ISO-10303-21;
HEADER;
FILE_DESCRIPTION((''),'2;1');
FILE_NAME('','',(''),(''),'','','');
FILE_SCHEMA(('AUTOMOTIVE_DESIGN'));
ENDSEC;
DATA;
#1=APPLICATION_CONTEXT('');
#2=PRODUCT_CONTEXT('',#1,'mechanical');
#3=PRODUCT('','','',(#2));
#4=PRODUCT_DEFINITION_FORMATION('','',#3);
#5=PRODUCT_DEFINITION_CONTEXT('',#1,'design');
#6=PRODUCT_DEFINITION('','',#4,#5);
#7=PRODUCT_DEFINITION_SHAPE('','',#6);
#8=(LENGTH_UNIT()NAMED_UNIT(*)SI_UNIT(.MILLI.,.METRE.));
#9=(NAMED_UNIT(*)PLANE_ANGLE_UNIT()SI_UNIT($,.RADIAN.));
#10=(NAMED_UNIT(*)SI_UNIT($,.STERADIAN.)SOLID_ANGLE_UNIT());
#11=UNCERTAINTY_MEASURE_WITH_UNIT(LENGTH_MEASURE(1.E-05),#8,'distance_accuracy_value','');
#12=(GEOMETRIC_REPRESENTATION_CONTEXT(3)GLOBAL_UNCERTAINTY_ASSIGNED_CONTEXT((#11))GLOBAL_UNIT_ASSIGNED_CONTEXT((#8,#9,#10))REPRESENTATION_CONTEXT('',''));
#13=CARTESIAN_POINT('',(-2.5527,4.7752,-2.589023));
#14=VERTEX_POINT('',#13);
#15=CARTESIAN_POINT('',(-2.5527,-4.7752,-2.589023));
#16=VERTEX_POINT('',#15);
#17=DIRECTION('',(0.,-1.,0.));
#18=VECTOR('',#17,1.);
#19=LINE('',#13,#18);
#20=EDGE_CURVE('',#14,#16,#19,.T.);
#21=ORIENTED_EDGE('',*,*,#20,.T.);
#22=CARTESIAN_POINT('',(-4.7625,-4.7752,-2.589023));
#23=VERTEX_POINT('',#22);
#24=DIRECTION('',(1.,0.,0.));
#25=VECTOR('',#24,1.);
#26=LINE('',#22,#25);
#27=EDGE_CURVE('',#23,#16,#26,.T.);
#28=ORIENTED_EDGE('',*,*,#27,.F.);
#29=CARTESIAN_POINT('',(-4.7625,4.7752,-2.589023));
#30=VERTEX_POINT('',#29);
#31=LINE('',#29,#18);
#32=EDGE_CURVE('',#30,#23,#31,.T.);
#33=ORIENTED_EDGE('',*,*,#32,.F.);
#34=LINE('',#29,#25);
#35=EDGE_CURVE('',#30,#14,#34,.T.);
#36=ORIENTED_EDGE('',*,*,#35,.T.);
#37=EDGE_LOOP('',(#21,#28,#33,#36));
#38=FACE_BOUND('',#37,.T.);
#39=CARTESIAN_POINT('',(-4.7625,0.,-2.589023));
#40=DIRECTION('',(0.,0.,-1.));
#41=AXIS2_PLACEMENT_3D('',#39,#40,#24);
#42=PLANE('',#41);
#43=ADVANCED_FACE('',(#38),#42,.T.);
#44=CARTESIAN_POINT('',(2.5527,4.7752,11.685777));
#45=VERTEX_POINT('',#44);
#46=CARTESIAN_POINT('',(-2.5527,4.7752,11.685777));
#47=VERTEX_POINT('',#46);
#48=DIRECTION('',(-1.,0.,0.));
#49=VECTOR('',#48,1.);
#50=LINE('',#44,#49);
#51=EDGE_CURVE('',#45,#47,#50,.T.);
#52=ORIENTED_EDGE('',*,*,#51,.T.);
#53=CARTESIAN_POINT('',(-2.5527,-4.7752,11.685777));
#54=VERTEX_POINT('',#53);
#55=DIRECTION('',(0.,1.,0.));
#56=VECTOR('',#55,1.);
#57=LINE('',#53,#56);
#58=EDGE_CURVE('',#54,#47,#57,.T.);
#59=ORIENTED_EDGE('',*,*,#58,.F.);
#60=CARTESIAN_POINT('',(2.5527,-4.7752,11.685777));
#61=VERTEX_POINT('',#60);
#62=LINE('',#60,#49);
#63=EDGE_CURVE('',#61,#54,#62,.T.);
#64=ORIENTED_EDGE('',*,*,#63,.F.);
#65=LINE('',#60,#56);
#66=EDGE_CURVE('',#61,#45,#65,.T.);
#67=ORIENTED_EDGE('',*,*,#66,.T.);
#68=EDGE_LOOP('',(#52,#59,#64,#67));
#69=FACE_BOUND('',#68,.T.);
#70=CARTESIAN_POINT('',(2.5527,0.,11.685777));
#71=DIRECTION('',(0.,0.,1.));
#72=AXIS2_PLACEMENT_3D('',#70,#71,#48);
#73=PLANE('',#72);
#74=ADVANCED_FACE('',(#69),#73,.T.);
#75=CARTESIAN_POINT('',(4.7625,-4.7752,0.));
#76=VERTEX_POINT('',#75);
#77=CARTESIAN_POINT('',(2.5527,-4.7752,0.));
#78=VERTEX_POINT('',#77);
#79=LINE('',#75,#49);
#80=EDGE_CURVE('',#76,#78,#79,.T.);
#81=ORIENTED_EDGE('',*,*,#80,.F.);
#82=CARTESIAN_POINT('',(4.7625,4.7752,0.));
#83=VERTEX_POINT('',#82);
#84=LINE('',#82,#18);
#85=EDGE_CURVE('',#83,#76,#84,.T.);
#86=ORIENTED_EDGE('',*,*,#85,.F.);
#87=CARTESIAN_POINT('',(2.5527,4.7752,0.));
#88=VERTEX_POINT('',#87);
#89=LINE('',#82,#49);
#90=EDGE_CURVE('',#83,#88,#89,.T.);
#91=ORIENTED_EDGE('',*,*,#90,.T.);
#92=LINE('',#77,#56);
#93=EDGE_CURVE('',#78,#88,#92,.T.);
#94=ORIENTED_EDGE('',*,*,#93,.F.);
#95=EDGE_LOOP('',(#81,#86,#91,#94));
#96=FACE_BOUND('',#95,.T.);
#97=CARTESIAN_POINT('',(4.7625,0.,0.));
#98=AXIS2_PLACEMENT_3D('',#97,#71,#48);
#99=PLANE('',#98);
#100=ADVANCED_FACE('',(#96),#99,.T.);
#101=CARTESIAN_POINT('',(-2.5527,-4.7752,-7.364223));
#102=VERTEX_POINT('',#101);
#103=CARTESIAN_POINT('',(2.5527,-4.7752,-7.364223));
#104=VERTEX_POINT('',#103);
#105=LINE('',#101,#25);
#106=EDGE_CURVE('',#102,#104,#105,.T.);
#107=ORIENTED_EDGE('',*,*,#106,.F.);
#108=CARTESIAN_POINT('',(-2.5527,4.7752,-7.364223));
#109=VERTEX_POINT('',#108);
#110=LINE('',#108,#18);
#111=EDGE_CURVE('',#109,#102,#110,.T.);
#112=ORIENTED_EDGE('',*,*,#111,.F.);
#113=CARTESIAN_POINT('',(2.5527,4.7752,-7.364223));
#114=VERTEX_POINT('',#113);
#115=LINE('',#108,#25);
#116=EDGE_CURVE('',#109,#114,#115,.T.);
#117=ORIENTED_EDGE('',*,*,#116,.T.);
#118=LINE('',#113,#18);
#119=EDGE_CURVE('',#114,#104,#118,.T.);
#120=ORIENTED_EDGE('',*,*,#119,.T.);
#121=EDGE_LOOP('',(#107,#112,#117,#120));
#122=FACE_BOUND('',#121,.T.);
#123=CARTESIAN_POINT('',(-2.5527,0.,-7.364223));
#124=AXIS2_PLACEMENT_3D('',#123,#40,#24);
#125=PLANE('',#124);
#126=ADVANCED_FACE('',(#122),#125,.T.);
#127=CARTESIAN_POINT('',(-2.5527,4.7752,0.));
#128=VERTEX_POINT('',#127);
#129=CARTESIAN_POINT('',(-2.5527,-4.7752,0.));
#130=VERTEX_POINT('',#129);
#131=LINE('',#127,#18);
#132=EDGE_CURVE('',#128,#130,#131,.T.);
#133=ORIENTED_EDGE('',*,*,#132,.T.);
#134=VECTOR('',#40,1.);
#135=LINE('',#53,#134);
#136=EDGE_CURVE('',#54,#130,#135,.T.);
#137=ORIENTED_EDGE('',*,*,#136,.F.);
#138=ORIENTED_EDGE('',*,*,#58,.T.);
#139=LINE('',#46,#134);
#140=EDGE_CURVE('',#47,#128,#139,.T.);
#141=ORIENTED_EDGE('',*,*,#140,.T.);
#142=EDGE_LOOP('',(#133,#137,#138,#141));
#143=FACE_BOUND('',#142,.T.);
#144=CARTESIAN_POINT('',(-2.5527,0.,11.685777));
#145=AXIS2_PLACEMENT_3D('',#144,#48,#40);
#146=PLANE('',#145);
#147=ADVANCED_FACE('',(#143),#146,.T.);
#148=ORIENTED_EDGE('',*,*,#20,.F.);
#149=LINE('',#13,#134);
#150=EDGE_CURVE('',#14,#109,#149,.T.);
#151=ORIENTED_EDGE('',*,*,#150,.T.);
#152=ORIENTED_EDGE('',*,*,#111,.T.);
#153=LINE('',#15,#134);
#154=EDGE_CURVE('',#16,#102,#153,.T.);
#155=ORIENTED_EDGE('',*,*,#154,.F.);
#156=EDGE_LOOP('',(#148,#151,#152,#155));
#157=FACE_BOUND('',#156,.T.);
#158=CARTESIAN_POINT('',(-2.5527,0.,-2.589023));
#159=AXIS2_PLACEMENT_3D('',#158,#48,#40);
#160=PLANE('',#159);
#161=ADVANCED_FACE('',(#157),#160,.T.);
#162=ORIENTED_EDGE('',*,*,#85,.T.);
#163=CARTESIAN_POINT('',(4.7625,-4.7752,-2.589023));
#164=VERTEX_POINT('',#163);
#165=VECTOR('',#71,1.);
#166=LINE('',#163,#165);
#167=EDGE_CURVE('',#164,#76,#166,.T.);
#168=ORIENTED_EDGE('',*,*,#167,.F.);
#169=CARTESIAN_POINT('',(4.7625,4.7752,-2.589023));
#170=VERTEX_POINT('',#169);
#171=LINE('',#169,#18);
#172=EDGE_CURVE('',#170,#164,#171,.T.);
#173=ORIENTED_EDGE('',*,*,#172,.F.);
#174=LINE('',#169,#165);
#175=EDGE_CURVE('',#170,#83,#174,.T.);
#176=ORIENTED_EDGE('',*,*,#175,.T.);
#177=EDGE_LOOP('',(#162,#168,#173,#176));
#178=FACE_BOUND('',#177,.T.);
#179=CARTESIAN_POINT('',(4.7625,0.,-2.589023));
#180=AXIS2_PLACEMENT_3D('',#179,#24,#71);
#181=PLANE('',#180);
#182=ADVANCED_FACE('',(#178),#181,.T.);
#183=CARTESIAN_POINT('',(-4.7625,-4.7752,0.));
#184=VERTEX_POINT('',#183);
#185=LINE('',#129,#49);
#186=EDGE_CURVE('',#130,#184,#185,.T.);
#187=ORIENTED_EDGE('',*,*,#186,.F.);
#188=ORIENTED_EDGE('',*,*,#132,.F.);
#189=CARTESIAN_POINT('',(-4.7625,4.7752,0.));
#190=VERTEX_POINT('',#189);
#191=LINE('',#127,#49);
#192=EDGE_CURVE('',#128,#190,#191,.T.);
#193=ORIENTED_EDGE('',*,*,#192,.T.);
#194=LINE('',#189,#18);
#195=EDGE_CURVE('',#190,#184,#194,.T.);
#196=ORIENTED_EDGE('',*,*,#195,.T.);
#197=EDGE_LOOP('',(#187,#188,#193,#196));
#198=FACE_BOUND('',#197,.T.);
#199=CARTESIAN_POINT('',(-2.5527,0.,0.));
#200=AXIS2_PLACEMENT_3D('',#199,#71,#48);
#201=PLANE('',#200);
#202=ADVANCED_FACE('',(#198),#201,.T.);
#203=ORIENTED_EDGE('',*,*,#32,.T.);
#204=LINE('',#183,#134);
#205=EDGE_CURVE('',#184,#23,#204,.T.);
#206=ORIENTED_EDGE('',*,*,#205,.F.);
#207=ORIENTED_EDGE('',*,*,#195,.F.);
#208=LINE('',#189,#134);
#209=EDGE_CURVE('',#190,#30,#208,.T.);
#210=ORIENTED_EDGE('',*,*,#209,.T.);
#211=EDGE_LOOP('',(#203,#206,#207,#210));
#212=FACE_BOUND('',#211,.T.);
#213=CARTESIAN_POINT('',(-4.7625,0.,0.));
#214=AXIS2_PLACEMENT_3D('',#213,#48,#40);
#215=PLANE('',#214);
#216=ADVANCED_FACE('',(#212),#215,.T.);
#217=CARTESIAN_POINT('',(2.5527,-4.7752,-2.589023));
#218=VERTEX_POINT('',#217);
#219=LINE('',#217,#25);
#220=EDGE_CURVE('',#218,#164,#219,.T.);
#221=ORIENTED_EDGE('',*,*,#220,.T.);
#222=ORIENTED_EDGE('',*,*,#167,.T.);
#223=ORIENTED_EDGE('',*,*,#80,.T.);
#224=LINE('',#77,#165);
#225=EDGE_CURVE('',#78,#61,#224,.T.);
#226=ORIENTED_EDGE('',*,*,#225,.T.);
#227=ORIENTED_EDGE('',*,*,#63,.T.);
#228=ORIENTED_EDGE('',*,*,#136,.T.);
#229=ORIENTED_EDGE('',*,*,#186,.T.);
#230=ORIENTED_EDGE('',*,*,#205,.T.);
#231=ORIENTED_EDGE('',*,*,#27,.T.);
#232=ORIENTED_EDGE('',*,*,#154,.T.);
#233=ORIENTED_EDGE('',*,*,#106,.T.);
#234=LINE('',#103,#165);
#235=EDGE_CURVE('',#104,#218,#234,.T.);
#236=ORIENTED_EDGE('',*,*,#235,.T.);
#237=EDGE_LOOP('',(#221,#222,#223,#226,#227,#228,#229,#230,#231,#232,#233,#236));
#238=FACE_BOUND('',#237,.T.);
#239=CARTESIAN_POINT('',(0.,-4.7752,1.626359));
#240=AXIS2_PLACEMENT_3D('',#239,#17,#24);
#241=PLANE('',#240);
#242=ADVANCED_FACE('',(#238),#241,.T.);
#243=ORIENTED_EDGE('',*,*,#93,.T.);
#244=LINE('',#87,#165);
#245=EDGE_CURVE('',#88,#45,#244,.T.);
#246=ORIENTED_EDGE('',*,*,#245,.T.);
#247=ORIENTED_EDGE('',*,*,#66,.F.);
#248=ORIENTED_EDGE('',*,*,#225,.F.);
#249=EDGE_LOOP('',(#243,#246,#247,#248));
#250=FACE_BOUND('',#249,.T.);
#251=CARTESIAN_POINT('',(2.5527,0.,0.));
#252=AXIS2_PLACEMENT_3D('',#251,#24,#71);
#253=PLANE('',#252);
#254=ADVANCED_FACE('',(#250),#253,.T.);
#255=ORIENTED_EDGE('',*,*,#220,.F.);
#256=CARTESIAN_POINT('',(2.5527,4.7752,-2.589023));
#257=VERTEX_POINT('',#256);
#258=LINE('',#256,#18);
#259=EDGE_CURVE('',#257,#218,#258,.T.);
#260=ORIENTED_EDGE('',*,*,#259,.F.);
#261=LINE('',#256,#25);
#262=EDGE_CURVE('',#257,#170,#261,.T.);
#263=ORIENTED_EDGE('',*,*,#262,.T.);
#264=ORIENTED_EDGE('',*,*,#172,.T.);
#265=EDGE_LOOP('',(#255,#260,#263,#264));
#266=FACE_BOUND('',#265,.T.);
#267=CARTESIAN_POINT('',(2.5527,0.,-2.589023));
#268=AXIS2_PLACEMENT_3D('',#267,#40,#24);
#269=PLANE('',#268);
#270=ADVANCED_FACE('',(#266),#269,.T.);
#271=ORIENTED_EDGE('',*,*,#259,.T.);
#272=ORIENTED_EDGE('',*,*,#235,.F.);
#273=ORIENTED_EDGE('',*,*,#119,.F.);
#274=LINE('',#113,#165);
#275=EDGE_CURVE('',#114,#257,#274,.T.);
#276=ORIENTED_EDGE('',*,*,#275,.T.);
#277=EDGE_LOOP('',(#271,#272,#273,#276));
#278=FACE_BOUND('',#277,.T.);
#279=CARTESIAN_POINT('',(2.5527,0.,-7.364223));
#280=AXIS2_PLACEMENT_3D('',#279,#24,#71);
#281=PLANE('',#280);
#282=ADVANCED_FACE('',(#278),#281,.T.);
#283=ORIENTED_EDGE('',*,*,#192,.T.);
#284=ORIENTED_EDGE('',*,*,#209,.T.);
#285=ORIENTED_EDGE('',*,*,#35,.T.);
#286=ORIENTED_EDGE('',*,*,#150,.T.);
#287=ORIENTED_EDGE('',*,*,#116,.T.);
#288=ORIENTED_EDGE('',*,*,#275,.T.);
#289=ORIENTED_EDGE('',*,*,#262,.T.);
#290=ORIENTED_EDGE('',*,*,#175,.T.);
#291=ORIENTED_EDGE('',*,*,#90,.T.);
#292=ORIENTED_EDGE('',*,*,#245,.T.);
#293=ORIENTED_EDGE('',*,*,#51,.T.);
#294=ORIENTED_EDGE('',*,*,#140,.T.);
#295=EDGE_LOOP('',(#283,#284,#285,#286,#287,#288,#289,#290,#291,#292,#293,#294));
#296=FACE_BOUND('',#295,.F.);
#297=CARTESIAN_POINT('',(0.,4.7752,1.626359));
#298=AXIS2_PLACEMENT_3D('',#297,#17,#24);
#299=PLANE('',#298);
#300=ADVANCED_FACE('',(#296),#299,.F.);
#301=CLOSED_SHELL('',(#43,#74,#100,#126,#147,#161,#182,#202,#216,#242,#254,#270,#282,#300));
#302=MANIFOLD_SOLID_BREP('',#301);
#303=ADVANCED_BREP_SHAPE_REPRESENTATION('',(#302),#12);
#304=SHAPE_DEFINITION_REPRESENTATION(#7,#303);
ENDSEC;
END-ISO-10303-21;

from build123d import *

# Parameters (mm, degrees)
F2_DEPTH = 4.7752


# Not quite as in the source:
# - a variable given as a bare number and used for a length is read in inches; the dataset says mm whatever the document's units were


with BuildPart() as f2:
    # F1 (on Front) → F2 (new body, symmetric)
    with BuildSketch(Plane.XZ):
        Polygon((-2.5527, 11.6857768009), (-2.5527, 0), (-4.7625, 0), (-4.7625, -2.5890231991), (-2.5527, -2.5890231991), (-2.5527, -7.3642231991), (2.5527, -7.3642231991), (2.5527, -2.5890231991), (4.7625, -2.5890231991), (4.7625, 0), (2.5527, 0), (2.5527, 11.6857768009), align=None)
    extrude(amount=F2_DEPTH, both=True)


solid = f2.part
